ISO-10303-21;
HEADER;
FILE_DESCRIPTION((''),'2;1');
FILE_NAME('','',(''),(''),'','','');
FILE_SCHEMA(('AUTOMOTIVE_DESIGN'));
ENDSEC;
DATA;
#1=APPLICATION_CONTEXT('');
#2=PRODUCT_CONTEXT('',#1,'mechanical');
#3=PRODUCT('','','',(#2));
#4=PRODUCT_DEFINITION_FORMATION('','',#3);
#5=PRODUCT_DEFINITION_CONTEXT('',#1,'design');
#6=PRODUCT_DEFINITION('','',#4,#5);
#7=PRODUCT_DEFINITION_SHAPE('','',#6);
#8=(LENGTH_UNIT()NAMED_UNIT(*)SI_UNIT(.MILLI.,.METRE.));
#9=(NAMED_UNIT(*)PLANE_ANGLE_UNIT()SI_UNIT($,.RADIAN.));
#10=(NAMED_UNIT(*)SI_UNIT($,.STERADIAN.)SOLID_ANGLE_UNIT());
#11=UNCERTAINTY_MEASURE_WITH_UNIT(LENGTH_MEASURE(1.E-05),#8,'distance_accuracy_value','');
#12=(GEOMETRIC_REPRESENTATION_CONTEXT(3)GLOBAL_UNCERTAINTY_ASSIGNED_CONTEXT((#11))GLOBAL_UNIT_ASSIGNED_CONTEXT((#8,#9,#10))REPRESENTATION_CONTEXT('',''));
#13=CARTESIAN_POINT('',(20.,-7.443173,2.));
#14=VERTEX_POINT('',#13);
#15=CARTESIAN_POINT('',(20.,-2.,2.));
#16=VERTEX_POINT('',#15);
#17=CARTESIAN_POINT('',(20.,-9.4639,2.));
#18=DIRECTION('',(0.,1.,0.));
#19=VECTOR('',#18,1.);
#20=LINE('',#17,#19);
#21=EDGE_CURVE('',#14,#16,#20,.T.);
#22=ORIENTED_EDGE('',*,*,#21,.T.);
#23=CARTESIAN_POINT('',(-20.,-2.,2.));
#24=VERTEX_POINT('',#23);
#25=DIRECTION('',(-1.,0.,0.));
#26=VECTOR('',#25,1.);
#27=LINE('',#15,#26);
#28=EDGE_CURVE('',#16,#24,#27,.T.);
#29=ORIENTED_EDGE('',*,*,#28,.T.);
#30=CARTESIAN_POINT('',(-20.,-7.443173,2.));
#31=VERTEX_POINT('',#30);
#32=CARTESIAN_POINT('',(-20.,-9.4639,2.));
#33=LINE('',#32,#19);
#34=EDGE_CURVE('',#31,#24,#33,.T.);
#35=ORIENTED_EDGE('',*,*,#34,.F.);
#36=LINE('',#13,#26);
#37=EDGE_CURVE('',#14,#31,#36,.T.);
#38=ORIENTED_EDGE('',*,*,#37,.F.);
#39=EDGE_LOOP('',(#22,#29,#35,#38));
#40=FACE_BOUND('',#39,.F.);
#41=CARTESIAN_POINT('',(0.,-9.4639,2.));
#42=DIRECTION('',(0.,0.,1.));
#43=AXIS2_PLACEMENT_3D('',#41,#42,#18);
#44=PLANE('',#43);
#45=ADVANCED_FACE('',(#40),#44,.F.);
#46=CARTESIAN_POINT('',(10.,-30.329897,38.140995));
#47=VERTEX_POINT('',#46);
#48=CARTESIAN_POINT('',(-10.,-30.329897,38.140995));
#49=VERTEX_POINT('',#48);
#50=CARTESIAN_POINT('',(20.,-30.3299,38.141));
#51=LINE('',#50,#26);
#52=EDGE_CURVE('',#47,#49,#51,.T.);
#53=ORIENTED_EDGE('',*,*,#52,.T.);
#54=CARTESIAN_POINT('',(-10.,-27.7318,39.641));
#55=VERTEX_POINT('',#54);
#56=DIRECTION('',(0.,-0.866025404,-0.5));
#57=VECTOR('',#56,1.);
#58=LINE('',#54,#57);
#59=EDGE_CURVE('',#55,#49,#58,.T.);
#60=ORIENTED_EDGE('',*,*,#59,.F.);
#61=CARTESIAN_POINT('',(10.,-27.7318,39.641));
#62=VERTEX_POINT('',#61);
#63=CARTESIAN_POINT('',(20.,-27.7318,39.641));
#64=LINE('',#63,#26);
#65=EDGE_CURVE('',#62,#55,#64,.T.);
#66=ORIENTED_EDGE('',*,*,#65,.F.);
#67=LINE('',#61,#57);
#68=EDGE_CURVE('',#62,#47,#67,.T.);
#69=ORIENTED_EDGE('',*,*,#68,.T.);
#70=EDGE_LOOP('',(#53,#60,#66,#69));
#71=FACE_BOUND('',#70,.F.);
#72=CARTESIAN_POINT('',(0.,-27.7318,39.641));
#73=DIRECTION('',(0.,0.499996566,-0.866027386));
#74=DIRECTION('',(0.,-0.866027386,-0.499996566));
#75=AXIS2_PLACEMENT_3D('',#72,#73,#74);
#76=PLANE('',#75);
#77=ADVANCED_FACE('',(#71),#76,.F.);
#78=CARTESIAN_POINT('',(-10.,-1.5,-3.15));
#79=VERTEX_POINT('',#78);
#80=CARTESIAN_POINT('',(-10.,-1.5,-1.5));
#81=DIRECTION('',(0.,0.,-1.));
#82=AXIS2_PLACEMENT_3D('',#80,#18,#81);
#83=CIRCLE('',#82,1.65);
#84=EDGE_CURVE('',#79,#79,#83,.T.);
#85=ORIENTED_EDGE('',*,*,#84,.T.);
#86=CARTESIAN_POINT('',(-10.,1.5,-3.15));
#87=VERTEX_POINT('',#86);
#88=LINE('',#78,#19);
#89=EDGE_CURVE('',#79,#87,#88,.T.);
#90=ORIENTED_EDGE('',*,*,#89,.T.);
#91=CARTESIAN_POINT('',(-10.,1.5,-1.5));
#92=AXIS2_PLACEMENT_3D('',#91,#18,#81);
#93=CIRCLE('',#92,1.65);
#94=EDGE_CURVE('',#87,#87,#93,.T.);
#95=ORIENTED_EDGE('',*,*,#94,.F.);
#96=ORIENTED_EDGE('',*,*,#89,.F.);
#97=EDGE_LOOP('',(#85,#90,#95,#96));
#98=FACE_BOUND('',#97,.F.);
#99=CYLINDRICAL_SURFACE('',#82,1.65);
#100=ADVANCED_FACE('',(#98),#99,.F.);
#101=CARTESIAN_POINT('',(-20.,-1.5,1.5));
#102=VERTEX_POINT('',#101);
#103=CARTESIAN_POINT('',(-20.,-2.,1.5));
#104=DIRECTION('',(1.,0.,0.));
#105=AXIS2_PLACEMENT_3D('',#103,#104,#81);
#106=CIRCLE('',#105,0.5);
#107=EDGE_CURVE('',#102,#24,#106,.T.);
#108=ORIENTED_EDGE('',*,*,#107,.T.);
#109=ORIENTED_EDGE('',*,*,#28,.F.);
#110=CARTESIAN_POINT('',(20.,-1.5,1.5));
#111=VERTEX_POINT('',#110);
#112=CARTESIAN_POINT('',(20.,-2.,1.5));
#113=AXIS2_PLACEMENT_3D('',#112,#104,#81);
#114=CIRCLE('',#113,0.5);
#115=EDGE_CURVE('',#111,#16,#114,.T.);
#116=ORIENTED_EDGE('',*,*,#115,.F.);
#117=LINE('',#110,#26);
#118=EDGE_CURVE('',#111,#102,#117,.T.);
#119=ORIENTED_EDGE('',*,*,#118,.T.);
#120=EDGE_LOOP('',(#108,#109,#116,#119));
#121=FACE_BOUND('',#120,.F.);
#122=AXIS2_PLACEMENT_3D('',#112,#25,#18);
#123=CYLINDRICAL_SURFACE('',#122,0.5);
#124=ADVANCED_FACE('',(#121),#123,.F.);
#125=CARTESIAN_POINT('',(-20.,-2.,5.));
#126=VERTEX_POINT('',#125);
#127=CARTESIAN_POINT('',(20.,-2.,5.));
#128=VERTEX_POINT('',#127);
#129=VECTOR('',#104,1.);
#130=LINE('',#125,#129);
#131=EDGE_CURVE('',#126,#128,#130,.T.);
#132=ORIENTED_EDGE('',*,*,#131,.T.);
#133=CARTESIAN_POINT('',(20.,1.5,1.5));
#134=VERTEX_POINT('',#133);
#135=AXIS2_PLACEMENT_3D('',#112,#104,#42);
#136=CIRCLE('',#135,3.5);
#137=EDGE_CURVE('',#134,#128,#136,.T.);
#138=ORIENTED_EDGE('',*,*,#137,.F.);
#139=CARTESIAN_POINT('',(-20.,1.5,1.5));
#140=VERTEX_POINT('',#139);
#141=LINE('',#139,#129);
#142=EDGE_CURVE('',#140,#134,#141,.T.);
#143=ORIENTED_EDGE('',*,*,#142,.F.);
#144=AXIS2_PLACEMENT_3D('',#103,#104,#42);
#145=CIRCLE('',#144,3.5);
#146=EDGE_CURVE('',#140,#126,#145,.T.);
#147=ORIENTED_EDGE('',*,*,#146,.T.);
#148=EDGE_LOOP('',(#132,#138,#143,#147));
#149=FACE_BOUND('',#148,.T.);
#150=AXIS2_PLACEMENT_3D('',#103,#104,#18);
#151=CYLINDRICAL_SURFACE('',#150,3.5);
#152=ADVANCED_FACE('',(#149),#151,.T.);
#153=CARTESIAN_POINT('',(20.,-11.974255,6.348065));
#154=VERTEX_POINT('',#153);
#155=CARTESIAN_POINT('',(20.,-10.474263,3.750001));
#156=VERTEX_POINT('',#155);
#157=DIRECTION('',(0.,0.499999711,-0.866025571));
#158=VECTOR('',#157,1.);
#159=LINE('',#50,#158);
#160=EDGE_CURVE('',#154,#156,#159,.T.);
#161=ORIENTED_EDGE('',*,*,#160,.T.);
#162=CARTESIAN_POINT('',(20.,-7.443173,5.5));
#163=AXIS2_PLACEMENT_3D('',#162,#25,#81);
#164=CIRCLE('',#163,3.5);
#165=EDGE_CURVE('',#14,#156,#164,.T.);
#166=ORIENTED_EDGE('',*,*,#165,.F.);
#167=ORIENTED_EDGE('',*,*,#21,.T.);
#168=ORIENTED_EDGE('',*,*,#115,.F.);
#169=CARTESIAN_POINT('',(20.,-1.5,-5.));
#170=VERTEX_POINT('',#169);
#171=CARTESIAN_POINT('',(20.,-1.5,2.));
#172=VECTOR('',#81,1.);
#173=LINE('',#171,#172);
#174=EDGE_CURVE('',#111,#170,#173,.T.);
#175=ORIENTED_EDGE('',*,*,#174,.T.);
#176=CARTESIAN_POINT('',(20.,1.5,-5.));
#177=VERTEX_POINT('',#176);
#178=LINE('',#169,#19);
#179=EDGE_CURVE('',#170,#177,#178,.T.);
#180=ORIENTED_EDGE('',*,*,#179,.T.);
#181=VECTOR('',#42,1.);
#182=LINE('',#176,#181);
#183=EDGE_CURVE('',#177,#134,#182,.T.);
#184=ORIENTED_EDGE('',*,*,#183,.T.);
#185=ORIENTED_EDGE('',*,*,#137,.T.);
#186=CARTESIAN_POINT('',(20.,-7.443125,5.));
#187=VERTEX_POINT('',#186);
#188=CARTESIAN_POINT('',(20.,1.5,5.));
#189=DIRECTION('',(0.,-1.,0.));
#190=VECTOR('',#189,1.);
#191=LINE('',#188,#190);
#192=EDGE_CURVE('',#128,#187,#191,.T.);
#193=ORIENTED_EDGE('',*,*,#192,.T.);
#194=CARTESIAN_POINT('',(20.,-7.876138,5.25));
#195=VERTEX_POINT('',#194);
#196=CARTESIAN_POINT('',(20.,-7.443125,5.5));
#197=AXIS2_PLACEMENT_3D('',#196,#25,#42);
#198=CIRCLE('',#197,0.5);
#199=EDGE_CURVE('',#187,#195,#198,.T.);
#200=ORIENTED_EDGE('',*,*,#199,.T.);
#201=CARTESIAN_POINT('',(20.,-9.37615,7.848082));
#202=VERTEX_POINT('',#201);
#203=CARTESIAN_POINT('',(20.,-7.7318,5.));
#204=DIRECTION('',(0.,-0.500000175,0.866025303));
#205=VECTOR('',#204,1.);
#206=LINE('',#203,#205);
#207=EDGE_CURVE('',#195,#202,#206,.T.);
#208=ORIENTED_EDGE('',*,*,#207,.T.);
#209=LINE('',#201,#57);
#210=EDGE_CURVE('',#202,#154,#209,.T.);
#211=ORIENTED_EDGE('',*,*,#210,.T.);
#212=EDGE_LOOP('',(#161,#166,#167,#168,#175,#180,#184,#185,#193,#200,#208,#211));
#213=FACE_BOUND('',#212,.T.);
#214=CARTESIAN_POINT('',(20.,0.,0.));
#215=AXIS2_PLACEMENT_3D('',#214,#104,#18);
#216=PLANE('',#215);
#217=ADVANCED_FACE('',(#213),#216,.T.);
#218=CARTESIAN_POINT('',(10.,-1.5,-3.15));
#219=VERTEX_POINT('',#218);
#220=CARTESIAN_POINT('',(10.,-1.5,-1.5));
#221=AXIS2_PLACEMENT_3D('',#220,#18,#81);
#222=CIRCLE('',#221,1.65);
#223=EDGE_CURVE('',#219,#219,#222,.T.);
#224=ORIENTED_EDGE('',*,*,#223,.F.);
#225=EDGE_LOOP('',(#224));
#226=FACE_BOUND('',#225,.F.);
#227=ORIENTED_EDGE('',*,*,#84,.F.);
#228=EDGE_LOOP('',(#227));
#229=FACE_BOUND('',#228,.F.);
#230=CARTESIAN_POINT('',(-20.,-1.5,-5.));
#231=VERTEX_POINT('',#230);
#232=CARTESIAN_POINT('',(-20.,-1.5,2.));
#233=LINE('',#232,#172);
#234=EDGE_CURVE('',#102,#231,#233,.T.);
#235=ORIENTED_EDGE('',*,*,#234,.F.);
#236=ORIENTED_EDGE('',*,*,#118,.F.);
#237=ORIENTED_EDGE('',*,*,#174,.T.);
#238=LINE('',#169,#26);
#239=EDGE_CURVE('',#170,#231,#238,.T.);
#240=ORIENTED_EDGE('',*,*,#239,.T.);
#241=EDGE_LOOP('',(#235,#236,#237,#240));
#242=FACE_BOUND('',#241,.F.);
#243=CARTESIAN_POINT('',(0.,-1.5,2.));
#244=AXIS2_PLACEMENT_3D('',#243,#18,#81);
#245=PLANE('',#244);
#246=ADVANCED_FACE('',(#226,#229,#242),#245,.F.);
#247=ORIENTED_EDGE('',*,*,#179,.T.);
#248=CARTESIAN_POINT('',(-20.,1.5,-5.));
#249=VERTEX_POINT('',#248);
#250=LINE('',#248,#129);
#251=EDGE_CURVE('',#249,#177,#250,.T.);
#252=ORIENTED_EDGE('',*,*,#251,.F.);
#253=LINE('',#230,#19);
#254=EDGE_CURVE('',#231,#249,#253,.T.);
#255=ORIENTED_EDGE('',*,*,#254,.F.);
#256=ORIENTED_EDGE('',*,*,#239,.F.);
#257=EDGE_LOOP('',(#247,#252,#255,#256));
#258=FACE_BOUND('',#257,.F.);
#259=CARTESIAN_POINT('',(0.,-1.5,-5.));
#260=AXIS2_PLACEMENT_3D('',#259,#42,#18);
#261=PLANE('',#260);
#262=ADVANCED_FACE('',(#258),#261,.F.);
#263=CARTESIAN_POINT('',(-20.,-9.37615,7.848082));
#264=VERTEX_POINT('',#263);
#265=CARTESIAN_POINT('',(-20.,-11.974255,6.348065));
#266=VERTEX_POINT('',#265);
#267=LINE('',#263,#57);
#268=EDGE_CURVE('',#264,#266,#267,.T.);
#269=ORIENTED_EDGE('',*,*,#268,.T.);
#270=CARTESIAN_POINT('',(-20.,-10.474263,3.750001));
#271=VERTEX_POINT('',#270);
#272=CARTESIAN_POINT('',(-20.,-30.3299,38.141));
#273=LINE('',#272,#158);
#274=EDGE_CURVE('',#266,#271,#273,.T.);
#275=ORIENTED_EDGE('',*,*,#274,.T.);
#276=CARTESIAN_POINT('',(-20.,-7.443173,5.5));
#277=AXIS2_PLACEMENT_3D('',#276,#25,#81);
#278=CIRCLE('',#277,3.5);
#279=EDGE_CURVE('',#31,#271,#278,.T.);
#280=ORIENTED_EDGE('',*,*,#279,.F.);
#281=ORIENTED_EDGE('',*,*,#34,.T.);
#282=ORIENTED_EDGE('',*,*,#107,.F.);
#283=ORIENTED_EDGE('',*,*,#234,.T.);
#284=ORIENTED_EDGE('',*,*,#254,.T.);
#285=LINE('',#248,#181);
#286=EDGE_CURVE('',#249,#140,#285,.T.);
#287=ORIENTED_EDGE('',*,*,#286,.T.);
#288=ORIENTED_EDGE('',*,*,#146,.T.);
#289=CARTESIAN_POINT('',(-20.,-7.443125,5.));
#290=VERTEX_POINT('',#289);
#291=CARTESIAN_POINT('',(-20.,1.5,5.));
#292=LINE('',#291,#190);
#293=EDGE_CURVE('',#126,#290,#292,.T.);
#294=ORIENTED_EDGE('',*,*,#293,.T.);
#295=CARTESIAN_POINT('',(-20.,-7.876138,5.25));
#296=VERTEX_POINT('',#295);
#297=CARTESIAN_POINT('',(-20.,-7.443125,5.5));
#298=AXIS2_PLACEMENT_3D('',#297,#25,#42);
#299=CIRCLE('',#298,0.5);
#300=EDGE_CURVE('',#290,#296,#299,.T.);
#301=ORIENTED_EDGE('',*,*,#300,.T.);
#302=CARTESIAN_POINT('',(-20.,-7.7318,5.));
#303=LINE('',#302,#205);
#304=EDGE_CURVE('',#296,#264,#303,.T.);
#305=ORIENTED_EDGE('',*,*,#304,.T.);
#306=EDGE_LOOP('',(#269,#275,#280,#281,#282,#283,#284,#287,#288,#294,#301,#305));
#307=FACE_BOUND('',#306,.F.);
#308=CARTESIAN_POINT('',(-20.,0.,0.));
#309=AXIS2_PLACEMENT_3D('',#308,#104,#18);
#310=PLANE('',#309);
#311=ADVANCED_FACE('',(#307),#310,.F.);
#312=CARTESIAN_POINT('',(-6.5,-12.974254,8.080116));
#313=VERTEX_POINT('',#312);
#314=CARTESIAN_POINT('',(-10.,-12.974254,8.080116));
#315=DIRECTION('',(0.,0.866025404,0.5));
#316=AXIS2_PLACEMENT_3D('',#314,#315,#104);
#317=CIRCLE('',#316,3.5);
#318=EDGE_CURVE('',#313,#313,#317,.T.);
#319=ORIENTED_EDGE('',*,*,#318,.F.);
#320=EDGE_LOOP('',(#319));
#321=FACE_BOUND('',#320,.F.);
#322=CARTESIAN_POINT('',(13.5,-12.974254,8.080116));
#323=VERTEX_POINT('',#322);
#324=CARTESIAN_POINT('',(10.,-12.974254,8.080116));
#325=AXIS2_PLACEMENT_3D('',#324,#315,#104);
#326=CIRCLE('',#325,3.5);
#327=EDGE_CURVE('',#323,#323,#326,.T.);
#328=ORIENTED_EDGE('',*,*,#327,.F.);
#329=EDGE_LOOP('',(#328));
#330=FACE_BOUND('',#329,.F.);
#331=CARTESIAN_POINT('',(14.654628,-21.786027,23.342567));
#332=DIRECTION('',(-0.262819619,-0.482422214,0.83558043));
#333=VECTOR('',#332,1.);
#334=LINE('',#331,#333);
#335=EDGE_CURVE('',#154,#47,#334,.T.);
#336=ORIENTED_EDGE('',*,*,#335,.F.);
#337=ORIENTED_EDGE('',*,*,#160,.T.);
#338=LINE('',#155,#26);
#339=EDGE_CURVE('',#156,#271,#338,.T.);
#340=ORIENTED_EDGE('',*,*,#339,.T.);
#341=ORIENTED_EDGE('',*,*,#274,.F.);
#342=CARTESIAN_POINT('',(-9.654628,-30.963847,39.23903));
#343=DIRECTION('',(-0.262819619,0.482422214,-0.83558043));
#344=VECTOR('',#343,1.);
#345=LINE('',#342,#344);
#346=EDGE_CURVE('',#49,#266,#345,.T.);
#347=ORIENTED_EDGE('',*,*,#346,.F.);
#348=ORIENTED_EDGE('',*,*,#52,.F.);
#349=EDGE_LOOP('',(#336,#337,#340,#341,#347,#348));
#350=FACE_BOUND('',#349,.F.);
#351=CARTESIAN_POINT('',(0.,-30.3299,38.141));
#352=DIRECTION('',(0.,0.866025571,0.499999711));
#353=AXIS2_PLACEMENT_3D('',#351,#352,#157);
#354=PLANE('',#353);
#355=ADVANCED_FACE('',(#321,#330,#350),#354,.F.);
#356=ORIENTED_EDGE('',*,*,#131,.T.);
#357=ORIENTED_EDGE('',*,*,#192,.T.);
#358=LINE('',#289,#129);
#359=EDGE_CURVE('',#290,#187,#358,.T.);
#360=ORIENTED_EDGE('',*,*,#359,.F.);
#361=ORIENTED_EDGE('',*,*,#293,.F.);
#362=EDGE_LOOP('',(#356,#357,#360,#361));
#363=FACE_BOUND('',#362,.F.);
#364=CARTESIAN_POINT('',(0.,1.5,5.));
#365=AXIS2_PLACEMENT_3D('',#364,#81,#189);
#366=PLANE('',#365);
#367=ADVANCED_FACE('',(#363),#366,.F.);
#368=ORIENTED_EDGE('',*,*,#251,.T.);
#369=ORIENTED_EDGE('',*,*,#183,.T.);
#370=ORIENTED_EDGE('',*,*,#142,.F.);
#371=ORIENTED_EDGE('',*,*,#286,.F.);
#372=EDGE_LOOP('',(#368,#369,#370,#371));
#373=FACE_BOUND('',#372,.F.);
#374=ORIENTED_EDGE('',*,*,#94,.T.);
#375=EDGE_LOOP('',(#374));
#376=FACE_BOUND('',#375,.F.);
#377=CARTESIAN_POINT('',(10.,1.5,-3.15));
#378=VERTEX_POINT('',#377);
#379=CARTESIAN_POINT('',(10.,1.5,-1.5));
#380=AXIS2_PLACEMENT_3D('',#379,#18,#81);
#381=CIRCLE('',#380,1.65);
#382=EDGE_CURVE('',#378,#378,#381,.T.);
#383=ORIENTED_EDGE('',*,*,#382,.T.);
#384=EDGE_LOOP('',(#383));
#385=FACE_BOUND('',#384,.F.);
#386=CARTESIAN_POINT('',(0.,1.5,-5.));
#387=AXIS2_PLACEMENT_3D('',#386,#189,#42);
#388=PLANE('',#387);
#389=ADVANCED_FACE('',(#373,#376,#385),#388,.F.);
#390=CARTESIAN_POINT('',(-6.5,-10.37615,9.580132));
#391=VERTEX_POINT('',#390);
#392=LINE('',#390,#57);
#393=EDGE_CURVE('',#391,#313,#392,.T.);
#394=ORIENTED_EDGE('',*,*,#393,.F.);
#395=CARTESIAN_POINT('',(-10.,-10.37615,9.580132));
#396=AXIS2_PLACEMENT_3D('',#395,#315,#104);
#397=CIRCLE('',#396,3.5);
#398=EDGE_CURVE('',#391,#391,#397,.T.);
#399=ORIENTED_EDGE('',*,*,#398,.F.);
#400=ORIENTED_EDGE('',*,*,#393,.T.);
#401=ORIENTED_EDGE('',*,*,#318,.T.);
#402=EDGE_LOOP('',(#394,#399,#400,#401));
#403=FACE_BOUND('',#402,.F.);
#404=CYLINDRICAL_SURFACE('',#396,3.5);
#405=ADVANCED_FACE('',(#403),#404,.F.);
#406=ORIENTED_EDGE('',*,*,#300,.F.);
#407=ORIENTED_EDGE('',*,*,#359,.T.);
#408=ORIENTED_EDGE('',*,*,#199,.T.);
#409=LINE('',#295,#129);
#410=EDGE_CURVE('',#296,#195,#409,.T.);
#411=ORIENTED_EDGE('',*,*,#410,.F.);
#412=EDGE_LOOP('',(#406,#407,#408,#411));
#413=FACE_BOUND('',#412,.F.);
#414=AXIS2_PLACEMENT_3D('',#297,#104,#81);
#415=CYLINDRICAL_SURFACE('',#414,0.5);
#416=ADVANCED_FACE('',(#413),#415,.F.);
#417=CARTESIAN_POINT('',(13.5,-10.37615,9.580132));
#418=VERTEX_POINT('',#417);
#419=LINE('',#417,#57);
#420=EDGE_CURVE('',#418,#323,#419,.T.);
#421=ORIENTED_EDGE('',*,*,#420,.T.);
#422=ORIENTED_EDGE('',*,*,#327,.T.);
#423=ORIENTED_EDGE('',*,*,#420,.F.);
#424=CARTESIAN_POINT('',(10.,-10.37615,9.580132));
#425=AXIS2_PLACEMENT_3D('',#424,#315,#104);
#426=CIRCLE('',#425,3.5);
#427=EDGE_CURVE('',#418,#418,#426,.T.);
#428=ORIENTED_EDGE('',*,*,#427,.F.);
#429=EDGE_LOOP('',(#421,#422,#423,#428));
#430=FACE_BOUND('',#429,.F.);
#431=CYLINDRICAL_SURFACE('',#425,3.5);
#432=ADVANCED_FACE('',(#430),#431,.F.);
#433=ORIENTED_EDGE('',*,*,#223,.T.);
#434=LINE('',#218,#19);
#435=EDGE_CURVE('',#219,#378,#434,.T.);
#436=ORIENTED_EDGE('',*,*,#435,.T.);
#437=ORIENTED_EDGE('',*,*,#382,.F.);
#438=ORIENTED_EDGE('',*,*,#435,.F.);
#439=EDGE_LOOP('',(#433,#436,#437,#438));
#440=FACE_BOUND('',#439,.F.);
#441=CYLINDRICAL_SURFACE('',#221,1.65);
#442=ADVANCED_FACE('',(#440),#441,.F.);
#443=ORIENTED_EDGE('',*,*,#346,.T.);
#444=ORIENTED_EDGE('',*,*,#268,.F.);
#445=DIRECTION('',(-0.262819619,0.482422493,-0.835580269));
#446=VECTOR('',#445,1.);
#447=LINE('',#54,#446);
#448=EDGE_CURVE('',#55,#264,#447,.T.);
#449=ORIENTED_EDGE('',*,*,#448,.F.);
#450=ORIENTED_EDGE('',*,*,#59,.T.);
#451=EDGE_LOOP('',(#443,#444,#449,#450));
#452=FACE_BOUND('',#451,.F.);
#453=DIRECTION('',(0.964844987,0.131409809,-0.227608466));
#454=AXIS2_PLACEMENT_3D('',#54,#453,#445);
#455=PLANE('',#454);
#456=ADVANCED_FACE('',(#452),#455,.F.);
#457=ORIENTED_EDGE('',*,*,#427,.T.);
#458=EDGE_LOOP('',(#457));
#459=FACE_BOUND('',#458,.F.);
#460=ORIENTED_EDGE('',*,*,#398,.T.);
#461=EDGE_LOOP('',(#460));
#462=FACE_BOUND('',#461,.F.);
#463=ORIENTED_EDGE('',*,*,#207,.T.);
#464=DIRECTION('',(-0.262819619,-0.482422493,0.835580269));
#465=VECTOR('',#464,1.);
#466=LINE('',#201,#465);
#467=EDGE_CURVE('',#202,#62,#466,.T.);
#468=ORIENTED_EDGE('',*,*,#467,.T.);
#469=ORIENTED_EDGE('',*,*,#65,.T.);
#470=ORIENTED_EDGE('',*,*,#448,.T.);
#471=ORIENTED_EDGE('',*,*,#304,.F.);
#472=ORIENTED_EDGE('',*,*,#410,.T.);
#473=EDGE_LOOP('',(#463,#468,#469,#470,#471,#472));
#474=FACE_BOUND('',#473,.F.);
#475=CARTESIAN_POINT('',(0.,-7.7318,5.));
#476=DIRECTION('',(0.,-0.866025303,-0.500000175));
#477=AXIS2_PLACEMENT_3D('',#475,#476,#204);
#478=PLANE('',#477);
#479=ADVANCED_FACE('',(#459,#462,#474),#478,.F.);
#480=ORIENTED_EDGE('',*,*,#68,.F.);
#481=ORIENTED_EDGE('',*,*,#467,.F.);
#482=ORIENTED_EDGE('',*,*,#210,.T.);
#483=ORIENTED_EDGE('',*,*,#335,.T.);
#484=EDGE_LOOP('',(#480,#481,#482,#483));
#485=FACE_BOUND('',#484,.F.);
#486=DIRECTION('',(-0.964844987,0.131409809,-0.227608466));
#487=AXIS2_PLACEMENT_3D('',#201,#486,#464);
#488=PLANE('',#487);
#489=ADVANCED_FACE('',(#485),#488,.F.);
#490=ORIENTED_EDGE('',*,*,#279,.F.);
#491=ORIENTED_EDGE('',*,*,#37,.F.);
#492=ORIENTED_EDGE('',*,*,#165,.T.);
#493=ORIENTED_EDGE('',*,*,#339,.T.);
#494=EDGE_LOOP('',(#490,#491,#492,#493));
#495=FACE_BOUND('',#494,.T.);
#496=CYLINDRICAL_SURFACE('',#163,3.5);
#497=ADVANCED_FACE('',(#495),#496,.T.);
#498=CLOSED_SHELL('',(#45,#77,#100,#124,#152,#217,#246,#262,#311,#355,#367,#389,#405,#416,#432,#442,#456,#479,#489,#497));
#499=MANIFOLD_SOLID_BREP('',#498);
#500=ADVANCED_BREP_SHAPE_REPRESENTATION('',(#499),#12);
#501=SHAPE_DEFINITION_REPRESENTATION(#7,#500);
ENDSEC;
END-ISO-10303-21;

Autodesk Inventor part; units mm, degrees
ref_plane "YZ Plane" through (0, 0, 0) normal (1, 0, 0) x (0, 1, 0)
ref_plane "XZ Plane" through (0, 0, 0) normal (0, 1, 0) x (-1, 0, 0)
ref_plane "XY Plane" through (0, 0, 0) normal (0, 0, 1) x (1, 0, 0)
sketch "Sketch1" plane through (0, 0, 0) normal (1, 0, 0) x (0, 1, 0)
  line L0 (1.5, -5) -> (1.5, 5)
  line L1 (1.5, 5) -> (-7.7318, 5)
  line L2 (-9.4639, 2) -> (-1.5, 2)
  line L3 (-1.5, 2) -> (-1.5, -5)
  line L4 (-1.5, -5) -> (1.5, -5)
  line L5 (-7.7318, 5) -> (-27.7318, 39.641)
  line L6 (-27.7318, 39.641) -> (-30.3299, 38.141)
  line L7 (-30.3299, 38.141) -> (-9.4639, 2)
  point P0 (0, 0)
  point P1 (0, -5)
  point P2 (1.5, 0)
  dimension "d0" = 3
  dimension "d1" = 10
  dimension "d2" = 150
  dimension "d3" = 3
  dimension "d4" = 3
  dimension "d5" = 40
  dimension "d6" = 7.995
extrude "Extrusion1" add sketch "Sketch1" along normal mid plane 40
fillet "Fillet1" radius 3.5 2 edges at (0, 1.5, 5) (0, -9.4639, 2)
fillet "Fillet1" radius 0.5 2 edges at (0, -1.5, 2) (0, -7.7318, 5)
sketch "Sketch2" plane through (-20, -1.5, -5) normal (0, -1, 0) x (1, 0, 0)
  line L0 (30, 3.5) -> (10, 3.5) construction
  line L1 (0, 0) -> (40, 0) construction
  point P0 (20, 5)
  point P1 (20, 3.5)
  dimension "d11" = 20
  dimension "d12" = 3.5
hole "Hole1" at (10, -1.5, -1.5) at (-10, -1.5, -1.5) direction (0, 1, 0) diameter 3.3 end through all
sketch "Sketch3" plane through (-20, -27.7318, 39.641) normal (0, 0.8660254, 0.5) x (1, 0, 0)
  line L0 (0, 39.7113) -> (40, 39.7113) projected
  line L1 (0, 0) -> (0, 39.7113) projected
  line L2 (0, 0) -> (40, 0) projected
  line L3 (40, 39.7113) -> (40, 0) projected
  line L4 (0, 0) -> (40, 0) projected
  line L5 (10, 0) -> (0, 36.7113)
  line L6 (0, 39.7113) -> (0, 0) projected
  line L7 (40, 36.7113) -> (30, 0)
  circle A0 centre (10, 34.7113) radius 3.5
  circle A1 centre (30, 34.7113) radius 3.5
  line L8 (10, 34.7113) -> (30, 34.7113) construction
  point P0 (20, 48.196)
  point P1 (20, 34.7113)
  point P2 (20, 0)
  dimension "d20" = 7
  dimension "d21" = 20
  dimension "d22" = 3
  dimension "d23" = 20
  dimension "d24" = 5
extrude "Extrusion2" cut sketch "Sketch3" against normal through all contours L5 L2 L1 | L3 L2 L7 | A0 | A1
equation "\"d3\" = d0"
equation "\"d4\" = d0"
properties part number "P-POD_DoorStop" material "Aluminum 6061"
